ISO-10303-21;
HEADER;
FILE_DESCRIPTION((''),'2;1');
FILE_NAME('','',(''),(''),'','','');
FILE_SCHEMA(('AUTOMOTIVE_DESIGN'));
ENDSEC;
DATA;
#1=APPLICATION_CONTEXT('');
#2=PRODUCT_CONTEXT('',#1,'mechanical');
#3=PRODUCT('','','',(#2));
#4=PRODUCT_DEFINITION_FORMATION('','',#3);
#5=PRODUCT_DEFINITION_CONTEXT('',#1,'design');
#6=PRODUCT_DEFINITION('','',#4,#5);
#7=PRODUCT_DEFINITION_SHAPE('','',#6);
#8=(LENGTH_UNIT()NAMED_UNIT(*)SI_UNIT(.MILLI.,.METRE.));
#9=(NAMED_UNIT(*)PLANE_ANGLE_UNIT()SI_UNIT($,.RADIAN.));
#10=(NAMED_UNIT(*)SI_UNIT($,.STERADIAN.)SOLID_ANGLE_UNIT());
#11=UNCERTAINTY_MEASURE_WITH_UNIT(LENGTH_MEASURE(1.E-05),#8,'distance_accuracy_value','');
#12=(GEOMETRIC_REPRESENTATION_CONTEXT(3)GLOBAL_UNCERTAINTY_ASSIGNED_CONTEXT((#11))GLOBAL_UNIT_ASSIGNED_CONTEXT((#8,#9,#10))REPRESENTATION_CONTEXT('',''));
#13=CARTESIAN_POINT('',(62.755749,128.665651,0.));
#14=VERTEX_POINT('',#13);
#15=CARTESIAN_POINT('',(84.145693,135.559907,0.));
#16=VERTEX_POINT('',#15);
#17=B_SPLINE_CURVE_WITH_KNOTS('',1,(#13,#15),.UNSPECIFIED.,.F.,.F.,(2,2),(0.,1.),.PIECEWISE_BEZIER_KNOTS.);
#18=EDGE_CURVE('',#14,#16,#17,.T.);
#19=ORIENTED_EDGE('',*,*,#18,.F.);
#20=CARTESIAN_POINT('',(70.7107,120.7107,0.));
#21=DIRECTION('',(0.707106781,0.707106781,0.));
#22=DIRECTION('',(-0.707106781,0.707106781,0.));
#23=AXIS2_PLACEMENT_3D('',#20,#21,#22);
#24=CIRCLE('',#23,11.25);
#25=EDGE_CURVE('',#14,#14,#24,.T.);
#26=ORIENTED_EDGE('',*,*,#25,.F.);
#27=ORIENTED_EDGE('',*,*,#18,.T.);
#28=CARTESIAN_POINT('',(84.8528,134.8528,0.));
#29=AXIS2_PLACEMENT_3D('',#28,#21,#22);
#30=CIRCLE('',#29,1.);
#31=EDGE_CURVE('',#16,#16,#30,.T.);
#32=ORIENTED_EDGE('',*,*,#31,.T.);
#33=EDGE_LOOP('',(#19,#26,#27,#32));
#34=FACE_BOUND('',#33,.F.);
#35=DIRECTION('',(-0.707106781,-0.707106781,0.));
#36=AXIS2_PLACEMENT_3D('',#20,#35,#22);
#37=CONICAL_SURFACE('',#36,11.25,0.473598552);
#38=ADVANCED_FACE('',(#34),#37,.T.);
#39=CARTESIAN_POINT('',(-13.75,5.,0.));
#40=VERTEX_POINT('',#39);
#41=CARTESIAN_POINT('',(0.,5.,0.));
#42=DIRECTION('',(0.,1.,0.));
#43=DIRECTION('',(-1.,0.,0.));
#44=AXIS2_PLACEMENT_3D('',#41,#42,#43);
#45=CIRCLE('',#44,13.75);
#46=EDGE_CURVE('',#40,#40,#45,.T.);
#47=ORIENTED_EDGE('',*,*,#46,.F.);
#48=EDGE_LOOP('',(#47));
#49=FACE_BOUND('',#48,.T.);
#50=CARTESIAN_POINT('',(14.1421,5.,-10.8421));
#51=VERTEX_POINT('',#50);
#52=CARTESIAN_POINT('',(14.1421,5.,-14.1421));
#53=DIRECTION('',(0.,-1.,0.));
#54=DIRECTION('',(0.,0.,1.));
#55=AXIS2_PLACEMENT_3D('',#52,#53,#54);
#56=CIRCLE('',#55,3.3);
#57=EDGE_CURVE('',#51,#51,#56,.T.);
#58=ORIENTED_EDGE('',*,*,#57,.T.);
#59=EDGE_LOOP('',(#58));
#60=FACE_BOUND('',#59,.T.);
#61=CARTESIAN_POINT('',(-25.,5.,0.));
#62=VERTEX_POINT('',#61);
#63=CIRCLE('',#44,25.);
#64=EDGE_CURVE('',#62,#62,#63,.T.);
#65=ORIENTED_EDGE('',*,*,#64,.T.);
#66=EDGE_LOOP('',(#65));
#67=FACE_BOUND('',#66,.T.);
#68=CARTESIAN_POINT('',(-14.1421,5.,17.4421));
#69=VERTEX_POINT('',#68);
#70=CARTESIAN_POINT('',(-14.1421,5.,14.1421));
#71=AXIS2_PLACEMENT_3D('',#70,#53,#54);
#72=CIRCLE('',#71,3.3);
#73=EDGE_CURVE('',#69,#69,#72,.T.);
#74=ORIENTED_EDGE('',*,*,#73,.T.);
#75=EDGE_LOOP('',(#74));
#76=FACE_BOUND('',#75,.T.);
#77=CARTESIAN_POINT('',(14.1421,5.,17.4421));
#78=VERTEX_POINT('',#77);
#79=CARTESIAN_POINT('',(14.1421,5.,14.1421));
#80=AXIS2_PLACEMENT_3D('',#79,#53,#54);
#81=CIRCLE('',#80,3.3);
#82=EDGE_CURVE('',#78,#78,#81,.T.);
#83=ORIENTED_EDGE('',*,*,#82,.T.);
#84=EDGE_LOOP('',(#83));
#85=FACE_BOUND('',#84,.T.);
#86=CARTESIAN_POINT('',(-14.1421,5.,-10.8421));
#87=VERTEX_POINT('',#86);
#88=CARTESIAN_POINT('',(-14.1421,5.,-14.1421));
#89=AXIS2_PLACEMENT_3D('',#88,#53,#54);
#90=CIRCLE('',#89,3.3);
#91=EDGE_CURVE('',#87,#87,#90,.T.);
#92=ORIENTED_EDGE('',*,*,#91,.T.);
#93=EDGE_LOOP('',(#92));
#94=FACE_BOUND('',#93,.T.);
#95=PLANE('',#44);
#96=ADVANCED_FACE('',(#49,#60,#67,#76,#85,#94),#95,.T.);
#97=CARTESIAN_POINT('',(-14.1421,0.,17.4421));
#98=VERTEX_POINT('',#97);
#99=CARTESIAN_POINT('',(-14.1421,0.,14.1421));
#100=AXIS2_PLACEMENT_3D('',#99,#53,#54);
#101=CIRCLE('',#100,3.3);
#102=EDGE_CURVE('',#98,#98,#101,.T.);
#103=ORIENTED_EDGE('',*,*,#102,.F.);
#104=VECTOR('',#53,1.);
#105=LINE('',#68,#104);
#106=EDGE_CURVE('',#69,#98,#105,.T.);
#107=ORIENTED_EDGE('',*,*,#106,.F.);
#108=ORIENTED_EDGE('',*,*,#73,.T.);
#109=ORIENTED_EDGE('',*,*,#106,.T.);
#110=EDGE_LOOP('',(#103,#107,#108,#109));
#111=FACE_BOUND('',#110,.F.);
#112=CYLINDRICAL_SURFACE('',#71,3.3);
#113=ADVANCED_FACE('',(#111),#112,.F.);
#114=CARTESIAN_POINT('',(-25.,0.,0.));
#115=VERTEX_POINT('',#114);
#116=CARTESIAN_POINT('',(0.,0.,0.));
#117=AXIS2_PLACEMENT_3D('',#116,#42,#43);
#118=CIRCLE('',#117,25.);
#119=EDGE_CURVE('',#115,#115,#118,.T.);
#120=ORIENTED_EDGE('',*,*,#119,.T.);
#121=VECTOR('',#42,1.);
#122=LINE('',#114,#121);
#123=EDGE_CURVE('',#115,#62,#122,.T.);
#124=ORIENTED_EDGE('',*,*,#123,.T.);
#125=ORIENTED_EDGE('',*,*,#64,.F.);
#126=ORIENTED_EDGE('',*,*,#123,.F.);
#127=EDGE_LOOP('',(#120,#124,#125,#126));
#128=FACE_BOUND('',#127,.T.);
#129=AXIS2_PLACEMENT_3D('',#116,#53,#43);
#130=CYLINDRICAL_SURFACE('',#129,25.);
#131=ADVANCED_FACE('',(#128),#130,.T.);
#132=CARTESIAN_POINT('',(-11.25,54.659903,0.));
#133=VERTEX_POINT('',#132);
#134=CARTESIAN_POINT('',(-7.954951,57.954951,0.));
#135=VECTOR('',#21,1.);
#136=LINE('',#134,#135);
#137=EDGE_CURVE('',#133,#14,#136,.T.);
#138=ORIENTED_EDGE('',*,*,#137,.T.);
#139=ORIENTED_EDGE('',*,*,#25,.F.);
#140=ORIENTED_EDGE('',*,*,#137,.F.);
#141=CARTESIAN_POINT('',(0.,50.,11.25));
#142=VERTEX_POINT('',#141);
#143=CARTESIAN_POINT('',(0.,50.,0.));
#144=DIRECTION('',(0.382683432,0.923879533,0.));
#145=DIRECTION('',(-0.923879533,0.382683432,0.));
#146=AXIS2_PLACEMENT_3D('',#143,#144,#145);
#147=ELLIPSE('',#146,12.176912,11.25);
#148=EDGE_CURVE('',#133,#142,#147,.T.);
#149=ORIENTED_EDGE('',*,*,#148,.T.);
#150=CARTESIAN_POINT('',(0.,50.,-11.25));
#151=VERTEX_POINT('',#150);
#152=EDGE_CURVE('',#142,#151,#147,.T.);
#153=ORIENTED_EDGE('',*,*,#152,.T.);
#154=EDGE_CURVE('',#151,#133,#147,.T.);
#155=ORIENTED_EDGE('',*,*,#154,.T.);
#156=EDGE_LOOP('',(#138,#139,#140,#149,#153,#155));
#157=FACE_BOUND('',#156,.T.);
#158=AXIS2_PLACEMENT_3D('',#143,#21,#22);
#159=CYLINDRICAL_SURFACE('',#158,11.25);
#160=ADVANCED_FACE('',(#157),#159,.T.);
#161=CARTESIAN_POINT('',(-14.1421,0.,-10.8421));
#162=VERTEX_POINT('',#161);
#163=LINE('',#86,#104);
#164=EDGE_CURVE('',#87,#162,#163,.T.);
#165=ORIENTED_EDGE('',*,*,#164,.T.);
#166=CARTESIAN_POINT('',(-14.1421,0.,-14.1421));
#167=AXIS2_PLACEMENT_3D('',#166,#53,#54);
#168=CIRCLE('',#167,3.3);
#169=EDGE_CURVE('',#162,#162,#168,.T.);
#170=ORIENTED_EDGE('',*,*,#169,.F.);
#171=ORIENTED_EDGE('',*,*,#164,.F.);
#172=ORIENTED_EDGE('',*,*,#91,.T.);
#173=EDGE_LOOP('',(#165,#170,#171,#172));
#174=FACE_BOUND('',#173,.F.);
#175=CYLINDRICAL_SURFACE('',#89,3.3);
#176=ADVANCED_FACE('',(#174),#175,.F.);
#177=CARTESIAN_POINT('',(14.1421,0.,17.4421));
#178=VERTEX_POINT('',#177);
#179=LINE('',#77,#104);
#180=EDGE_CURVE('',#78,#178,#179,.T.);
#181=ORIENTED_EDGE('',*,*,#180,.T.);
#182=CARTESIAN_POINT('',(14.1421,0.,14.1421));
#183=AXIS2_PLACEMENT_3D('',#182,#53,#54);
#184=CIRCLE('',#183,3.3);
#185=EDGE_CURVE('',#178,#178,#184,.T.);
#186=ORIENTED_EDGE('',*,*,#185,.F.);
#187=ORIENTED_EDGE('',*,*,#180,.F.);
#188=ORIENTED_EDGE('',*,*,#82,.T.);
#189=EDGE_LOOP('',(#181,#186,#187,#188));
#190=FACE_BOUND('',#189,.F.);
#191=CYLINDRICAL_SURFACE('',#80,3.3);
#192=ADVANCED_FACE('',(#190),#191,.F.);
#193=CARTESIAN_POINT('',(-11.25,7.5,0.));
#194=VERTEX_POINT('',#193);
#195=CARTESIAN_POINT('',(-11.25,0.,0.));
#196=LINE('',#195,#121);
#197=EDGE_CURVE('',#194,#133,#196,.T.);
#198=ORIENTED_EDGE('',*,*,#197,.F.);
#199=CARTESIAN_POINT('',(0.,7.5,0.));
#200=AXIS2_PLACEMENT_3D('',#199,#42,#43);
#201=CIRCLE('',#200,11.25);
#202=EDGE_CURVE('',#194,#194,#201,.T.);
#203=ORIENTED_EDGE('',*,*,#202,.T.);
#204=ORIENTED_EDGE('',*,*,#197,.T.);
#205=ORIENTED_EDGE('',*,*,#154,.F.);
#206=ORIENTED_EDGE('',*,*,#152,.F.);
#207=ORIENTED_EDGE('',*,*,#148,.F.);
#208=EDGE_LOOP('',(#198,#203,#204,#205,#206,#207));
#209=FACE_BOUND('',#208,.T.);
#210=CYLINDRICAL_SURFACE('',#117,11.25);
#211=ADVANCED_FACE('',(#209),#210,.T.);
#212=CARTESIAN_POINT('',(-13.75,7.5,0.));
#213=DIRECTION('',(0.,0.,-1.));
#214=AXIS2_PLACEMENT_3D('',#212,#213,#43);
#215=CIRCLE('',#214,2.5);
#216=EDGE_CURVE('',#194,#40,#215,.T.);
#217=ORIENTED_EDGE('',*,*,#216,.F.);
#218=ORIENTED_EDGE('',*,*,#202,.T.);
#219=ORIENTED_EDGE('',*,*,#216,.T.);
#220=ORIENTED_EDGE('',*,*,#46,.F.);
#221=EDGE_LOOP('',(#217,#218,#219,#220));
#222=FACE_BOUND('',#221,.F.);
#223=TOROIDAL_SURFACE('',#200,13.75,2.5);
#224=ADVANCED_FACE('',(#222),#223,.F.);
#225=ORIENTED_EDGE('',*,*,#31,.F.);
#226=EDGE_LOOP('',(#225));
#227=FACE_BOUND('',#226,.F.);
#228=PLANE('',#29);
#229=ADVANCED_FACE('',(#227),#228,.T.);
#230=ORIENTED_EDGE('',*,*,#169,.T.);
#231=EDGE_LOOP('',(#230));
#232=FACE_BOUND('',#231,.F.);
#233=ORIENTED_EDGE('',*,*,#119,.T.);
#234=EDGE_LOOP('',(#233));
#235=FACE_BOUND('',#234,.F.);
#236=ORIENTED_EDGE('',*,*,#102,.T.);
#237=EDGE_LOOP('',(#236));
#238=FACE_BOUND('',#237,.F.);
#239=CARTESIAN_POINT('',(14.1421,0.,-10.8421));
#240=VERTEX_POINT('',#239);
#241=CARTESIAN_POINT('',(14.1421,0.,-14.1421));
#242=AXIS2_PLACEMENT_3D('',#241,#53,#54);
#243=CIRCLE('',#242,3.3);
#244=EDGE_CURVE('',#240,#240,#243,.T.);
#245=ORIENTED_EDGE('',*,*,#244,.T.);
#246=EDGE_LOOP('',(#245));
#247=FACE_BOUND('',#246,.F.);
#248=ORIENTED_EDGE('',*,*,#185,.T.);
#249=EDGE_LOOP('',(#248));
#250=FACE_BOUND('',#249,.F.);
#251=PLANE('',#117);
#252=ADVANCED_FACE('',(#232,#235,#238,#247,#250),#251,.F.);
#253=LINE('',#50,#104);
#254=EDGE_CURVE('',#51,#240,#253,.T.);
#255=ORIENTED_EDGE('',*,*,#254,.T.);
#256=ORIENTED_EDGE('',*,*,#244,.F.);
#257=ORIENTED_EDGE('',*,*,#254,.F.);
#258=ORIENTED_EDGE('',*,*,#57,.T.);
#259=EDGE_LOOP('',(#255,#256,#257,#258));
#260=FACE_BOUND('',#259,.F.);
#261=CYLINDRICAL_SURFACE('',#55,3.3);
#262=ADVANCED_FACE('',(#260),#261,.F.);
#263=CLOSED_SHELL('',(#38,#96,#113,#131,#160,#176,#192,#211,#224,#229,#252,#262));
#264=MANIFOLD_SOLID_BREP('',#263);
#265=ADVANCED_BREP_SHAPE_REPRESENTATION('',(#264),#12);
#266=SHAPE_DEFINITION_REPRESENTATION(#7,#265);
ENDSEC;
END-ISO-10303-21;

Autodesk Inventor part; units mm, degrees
ref_plane "YZ Plane" through (0, 0, 0) normal (1, 0, 0) x (0, 1, 0)
ref_plane "XZ Plane" through (0, 0, 0) normal (0, 1, 0) x (-1, 0, 0)
sketch "Sketch1" plane through (0, 0, 0) normal (0, 0, 1) x (1, 0, 0)
  line L0 (0, 0) -> (0, 50)
  line L1 (0, 50) -> (70.7107, 120.7107)
  line L2 (0, 50) -> (30.994, 50) construction
  line L3 (70.7107, 120.7107) -> (84.8528, 134.8528) construction
  dimension "d0" = 50
  dimension "d1" = 100
  dimension "d2" = 45
  dimension "d24" = 120
sketch "Sketch2" plane through (0, 0, 0) normal (0, 1, 0) x (-1, 0, 0)
  circle A0 centre (0, 0) radius 11.25
  circle A1 centre (0, 0) radius 8.75 construction
  dimension "d6" = 17.5
  dimension "d7" = 2.5
  dimension "d27" = 22.5
sweep "Sweep1" add profiles "Sketch2" path "Sketch1"
sketch "Sketch3" plane through (0, 0, 0) normal (0, 1, 0) x (-1, 0, 0)
  circle A0 centre (0, 0) radius 11.25 projected
  circle A1 centre (0, 0) radius 20 construction
  circle A2 centre (0, 0) radius 25
  dimension "d8" = 40
  dimension "d9" = 5
  dimension "d10" = 50
extrude "Extrusion1" add sketch "Sketch3" along normal blind 5
sketch "Sketch4" plane through (0, 5, 0) normal (0, 1, 0) x (1, 0, 0)
  circle A0 centre (0, 0) radius 20 construction
  point P0 (-14.1421, 14.1421)
  point P1 (-14.1421, -14.1421)
  point P2 (14.1421, -14.1421)
  point P3 (14.1421, 14.1421)
hole "Hole1" at (-14.1421, 5, -14.1421) at (14.1421, 5, -14.1421) at (-14.1421, 5, 14.1421) at (14.1421, 5, 14.1421) direction (0, -1, 0) diameter 6.6 end through all
fillet "Fillet1" radius 2.5 1 edges at (11.25, 5, 0)
ref_plane "Work Plane1" through (84.8528, 134.8528, 0) normal (0.7071068, 0.7071068, 0) x (-0.7071068, 0.7071068, 0)
sketch "Sketch8" plane through (84.8528, 134.8528, 0) normal (0.7071068, 0.7071068, 0) x (-0.7071068, 0.7071068, 0)
  circle A0 centre (0, 0) radius 1
  point P0 (-35.3553, 0)
  dimension "d34" = 2
loft "Loft2" add profiles "Sketch8" section 1 edges at (78.6656, 112.7557, 0)
properties part number "Herramienta1-2" material "PLA"
